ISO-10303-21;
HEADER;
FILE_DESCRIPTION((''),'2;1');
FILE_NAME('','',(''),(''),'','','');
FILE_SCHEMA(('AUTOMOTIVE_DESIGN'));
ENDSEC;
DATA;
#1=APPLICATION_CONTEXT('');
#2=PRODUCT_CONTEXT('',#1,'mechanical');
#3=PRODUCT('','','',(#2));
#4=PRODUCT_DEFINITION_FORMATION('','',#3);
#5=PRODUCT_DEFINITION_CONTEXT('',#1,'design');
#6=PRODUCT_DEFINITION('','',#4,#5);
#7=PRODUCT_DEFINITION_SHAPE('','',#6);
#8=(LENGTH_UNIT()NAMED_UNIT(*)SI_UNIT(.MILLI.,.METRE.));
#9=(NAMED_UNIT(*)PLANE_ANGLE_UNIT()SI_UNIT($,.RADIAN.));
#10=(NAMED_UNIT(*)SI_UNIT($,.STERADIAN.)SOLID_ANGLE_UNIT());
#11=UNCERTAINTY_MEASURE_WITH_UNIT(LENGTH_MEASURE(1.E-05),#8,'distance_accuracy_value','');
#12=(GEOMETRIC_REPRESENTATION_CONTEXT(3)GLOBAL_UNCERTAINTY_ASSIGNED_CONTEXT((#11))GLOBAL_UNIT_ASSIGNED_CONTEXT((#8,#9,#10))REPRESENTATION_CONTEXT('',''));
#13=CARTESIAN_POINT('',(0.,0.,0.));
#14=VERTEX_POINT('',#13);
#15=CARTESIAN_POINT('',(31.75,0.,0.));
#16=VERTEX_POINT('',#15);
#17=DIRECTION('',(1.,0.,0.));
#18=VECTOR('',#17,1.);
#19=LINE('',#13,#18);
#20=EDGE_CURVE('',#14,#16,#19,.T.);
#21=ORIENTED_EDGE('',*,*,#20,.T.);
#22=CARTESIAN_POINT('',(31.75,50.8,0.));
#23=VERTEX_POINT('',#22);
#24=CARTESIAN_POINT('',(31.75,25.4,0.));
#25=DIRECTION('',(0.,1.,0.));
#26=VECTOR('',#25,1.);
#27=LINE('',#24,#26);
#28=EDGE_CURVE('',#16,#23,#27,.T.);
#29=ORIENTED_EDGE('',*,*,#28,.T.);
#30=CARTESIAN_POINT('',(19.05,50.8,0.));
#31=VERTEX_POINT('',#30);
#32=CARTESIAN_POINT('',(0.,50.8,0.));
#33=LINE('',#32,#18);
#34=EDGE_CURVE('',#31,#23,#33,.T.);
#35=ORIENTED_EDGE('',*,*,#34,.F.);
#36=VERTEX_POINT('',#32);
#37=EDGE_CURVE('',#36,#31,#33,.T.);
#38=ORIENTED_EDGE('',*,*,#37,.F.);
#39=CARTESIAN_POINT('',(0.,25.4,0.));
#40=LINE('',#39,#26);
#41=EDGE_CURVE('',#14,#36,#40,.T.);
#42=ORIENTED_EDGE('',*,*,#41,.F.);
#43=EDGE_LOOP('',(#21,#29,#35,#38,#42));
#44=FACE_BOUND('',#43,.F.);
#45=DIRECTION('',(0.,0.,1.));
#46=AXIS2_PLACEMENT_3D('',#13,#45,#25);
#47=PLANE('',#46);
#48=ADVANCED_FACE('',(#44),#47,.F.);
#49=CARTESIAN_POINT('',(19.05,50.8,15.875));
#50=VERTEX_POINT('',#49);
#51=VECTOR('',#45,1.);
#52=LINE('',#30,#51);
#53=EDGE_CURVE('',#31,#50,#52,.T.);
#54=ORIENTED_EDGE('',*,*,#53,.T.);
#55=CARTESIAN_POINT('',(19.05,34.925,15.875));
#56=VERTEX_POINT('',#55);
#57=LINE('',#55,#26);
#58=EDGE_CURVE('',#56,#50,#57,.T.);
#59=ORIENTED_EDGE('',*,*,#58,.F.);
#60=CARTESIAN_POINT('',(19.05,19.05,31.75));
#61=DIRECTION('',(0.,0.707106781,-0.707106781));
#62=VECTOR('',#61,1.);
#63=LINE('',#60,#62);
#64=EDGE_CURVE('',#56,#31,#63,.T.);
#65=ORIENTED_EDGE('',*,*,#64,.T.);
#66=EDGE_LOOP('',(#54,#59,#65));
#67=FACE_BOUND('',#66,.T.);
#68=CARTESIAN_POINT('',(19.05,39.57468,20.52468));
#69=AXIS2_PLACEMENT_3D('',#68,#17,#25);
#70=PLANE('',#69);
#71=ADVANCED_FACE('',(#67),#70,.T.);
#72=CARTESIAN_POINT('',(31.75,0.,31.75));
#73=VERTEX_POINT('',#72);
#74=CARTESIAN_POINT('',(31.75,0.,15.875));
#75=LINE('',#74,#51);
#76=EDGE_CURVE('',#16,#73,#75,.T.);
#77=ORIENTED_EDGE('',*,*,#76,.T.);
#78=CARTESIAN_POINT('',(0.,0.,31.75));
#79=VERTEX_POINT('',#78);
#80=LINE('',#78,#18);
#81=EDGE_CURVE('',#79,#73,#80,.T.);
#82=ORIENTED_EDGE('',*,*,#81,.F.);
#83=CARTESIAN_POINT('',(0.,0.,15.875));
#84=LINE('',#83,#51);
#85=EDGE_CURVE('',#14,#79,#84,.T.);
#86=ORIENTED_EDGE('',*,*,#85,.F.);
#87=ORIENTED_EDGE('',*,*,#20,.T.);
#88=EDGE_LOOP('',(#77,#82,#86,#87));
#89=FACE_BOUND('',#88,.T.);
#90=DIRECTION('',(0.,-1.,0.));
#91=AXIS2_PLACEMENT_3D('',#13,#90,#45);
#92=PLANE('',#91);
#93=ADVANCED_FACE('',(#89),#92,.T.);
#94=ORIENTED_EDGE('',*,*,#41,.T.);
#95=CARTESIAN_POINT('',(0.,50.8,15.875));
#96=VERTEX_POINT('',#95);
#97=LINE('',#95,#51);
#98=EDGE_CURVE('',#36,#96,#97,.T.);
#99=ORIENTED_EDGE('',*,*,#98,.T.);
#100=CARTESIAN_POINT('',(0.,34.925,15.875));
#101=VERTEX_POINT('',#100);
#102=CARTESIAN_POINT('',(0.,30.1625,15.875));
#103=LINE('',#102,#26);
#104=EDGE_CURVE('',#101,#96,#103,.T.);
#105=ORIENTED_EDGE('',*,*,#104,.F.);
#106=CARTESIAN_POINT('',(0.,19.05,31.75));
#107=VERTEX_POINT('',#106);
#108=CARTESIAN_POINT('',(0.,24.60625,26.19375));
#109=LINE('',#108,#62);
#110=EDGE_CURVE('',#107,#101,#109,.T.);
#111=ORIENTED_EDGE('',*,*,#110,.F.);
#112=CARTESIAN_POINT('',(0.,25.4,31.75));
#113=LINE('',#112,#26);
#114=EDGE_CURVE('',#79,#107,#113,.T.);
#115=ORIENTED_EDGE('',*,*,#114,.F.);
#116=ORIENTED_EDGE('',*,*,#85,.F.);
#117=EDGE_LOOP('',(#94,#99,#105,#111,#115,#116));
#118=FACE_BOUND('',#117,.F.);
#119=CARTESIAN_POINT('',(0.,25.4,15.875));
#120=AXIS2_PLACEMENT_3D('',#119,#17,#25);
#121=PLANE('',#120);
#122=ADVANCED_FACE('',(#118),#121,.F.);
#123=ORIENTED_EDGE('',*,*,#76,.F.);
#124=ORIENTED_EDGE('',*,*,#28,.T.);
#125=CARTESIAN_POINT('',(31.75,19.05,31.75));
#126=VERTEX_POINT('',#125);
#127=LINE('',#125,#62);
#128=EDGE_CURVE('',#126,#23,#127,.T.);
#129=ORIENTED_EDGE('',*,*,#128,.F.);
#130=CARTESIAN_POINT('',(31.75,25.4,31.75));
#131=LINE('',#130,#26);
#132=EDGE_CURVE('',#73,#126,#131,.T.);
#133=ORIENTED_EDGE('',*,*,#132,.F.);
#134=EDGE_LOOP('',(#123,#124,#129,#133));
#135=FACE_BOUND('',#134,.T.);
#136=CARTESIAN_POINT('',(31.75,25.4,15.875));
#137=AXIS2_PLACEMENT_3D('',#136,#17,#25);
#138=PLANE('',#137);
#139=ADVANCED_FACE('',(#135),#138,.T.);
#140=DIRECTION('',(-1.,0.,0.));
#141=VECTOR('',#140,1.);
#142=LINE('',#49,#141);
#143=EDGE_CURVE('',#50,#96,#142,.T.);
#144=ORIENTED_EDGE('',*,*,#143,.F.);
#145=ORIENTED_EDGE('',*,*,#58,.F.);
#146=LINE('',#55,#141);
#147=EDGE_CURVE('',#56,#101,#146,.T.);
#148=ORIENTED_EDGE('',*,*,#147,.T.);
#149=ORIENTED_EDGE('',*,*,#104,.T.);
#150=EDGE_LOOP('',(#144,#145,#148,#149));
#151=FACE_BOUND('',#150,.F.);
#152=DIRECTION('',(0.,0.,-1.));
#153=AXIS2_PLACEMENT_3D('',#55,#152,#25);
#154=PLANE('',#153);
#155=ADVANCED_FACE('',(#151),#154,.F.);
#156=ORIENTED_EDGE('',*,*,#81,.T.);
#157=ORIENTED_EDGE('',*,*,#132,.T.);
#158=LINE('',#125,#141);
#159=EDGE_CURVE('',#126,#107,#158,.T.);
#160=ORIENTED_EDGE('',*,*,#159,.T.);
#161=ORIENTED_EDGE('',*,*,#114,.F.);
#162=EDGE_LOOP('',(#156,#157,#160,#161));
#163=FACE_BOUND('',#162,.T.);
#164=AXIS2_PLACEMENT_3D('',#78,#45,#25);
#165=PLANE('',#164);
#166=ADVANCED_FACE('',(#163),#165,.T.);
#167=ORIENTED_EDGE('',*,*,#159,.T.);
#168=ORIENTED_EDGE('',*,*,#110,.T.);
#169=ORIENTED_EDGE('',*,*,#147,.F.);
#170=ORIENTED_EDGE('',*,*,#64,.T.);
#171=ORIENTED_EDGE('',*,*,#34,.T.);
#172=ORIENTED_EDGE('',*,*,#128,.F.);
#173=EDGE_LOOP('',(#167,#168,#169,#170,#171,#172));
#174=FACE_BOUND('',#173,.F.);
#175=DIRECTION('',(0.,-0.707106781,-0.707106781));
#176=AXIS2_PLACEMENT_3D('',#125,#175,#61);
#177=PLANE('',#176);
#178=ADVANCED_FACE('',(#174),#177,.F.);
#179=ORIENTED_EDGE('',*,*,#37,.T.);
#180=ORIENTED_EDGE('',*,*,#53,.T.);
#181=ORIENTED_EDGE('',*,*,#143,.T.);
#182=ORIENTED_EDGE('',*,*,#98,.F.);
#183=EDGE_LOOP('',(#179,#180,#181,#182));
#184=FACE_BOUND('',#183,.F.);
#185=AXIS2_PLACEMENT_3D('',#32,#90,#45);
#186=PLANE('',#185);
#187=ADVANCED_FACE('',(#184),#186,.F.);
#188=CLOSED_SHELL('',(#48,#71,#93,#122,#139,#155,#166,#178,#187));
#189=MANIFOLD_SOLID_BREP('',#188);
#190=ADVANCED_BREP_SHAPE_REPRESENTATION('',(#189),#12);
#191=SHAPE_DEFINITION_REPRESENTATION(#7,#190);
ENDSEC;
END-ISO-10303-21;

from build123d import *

# Parameters (mm, degrees)
F0_W     = 50.8
F0_H     = 31.75
F1_DEPTH = 31.75
F3_DEPTH = 12.7
F5_DEPTH = 50.8
F7_DEPTH = 25.4


# Not quite as in the source:
# - a feature of the source that left no trace in its solid (it failed there, or was rolled back) is left out


with BuildPart() as f1:
    # F0 (on Right) → F1 (new body)
    with BuildSketch(Plane.YZ):
        with Locations((25.4, 15.875)):
            Rectangle(F0_W, F0_H)
    extrude(amount=F1_DEPTH)

    # F2 (on face) → F3 (cut)
    with BuildSketch(Plane.YZ.offset(31.75)):
        Polygon((19.05, 31.75), (50.8, 0), (50.8, 31.75), align=None)
    extrude(amount=-F3_DEPTH, mode=Mode.SUBTRACT)

    # F4 (on face) → F5 (cut)
    with BuildSketch(Plane.YZ.offset(19.05)):
        Polygon((19.05, 31.75), (34.925, 15.875), (38.1, 31.75), align=None)
    extrude(amount=-F5_DEPTH, mode=Mode.SUBTRACT)

    # F6 (on face) → F7 (cut)
    with BuildSketch(Plane.YZ.offset(19.05)):
        Polygon((38.1, 31.75), (34.925, 15.875), (50.8, 15.875), (50.8, 31.2204860245), align=None)
        Polygon((50.8, 31.75), (38.1, 31.75), (50.8, 31.2204860245), align=None)
    extrude(amount=-F7_DEPTH, mode=Mode.SUBTRACT)


solid = f1.part
